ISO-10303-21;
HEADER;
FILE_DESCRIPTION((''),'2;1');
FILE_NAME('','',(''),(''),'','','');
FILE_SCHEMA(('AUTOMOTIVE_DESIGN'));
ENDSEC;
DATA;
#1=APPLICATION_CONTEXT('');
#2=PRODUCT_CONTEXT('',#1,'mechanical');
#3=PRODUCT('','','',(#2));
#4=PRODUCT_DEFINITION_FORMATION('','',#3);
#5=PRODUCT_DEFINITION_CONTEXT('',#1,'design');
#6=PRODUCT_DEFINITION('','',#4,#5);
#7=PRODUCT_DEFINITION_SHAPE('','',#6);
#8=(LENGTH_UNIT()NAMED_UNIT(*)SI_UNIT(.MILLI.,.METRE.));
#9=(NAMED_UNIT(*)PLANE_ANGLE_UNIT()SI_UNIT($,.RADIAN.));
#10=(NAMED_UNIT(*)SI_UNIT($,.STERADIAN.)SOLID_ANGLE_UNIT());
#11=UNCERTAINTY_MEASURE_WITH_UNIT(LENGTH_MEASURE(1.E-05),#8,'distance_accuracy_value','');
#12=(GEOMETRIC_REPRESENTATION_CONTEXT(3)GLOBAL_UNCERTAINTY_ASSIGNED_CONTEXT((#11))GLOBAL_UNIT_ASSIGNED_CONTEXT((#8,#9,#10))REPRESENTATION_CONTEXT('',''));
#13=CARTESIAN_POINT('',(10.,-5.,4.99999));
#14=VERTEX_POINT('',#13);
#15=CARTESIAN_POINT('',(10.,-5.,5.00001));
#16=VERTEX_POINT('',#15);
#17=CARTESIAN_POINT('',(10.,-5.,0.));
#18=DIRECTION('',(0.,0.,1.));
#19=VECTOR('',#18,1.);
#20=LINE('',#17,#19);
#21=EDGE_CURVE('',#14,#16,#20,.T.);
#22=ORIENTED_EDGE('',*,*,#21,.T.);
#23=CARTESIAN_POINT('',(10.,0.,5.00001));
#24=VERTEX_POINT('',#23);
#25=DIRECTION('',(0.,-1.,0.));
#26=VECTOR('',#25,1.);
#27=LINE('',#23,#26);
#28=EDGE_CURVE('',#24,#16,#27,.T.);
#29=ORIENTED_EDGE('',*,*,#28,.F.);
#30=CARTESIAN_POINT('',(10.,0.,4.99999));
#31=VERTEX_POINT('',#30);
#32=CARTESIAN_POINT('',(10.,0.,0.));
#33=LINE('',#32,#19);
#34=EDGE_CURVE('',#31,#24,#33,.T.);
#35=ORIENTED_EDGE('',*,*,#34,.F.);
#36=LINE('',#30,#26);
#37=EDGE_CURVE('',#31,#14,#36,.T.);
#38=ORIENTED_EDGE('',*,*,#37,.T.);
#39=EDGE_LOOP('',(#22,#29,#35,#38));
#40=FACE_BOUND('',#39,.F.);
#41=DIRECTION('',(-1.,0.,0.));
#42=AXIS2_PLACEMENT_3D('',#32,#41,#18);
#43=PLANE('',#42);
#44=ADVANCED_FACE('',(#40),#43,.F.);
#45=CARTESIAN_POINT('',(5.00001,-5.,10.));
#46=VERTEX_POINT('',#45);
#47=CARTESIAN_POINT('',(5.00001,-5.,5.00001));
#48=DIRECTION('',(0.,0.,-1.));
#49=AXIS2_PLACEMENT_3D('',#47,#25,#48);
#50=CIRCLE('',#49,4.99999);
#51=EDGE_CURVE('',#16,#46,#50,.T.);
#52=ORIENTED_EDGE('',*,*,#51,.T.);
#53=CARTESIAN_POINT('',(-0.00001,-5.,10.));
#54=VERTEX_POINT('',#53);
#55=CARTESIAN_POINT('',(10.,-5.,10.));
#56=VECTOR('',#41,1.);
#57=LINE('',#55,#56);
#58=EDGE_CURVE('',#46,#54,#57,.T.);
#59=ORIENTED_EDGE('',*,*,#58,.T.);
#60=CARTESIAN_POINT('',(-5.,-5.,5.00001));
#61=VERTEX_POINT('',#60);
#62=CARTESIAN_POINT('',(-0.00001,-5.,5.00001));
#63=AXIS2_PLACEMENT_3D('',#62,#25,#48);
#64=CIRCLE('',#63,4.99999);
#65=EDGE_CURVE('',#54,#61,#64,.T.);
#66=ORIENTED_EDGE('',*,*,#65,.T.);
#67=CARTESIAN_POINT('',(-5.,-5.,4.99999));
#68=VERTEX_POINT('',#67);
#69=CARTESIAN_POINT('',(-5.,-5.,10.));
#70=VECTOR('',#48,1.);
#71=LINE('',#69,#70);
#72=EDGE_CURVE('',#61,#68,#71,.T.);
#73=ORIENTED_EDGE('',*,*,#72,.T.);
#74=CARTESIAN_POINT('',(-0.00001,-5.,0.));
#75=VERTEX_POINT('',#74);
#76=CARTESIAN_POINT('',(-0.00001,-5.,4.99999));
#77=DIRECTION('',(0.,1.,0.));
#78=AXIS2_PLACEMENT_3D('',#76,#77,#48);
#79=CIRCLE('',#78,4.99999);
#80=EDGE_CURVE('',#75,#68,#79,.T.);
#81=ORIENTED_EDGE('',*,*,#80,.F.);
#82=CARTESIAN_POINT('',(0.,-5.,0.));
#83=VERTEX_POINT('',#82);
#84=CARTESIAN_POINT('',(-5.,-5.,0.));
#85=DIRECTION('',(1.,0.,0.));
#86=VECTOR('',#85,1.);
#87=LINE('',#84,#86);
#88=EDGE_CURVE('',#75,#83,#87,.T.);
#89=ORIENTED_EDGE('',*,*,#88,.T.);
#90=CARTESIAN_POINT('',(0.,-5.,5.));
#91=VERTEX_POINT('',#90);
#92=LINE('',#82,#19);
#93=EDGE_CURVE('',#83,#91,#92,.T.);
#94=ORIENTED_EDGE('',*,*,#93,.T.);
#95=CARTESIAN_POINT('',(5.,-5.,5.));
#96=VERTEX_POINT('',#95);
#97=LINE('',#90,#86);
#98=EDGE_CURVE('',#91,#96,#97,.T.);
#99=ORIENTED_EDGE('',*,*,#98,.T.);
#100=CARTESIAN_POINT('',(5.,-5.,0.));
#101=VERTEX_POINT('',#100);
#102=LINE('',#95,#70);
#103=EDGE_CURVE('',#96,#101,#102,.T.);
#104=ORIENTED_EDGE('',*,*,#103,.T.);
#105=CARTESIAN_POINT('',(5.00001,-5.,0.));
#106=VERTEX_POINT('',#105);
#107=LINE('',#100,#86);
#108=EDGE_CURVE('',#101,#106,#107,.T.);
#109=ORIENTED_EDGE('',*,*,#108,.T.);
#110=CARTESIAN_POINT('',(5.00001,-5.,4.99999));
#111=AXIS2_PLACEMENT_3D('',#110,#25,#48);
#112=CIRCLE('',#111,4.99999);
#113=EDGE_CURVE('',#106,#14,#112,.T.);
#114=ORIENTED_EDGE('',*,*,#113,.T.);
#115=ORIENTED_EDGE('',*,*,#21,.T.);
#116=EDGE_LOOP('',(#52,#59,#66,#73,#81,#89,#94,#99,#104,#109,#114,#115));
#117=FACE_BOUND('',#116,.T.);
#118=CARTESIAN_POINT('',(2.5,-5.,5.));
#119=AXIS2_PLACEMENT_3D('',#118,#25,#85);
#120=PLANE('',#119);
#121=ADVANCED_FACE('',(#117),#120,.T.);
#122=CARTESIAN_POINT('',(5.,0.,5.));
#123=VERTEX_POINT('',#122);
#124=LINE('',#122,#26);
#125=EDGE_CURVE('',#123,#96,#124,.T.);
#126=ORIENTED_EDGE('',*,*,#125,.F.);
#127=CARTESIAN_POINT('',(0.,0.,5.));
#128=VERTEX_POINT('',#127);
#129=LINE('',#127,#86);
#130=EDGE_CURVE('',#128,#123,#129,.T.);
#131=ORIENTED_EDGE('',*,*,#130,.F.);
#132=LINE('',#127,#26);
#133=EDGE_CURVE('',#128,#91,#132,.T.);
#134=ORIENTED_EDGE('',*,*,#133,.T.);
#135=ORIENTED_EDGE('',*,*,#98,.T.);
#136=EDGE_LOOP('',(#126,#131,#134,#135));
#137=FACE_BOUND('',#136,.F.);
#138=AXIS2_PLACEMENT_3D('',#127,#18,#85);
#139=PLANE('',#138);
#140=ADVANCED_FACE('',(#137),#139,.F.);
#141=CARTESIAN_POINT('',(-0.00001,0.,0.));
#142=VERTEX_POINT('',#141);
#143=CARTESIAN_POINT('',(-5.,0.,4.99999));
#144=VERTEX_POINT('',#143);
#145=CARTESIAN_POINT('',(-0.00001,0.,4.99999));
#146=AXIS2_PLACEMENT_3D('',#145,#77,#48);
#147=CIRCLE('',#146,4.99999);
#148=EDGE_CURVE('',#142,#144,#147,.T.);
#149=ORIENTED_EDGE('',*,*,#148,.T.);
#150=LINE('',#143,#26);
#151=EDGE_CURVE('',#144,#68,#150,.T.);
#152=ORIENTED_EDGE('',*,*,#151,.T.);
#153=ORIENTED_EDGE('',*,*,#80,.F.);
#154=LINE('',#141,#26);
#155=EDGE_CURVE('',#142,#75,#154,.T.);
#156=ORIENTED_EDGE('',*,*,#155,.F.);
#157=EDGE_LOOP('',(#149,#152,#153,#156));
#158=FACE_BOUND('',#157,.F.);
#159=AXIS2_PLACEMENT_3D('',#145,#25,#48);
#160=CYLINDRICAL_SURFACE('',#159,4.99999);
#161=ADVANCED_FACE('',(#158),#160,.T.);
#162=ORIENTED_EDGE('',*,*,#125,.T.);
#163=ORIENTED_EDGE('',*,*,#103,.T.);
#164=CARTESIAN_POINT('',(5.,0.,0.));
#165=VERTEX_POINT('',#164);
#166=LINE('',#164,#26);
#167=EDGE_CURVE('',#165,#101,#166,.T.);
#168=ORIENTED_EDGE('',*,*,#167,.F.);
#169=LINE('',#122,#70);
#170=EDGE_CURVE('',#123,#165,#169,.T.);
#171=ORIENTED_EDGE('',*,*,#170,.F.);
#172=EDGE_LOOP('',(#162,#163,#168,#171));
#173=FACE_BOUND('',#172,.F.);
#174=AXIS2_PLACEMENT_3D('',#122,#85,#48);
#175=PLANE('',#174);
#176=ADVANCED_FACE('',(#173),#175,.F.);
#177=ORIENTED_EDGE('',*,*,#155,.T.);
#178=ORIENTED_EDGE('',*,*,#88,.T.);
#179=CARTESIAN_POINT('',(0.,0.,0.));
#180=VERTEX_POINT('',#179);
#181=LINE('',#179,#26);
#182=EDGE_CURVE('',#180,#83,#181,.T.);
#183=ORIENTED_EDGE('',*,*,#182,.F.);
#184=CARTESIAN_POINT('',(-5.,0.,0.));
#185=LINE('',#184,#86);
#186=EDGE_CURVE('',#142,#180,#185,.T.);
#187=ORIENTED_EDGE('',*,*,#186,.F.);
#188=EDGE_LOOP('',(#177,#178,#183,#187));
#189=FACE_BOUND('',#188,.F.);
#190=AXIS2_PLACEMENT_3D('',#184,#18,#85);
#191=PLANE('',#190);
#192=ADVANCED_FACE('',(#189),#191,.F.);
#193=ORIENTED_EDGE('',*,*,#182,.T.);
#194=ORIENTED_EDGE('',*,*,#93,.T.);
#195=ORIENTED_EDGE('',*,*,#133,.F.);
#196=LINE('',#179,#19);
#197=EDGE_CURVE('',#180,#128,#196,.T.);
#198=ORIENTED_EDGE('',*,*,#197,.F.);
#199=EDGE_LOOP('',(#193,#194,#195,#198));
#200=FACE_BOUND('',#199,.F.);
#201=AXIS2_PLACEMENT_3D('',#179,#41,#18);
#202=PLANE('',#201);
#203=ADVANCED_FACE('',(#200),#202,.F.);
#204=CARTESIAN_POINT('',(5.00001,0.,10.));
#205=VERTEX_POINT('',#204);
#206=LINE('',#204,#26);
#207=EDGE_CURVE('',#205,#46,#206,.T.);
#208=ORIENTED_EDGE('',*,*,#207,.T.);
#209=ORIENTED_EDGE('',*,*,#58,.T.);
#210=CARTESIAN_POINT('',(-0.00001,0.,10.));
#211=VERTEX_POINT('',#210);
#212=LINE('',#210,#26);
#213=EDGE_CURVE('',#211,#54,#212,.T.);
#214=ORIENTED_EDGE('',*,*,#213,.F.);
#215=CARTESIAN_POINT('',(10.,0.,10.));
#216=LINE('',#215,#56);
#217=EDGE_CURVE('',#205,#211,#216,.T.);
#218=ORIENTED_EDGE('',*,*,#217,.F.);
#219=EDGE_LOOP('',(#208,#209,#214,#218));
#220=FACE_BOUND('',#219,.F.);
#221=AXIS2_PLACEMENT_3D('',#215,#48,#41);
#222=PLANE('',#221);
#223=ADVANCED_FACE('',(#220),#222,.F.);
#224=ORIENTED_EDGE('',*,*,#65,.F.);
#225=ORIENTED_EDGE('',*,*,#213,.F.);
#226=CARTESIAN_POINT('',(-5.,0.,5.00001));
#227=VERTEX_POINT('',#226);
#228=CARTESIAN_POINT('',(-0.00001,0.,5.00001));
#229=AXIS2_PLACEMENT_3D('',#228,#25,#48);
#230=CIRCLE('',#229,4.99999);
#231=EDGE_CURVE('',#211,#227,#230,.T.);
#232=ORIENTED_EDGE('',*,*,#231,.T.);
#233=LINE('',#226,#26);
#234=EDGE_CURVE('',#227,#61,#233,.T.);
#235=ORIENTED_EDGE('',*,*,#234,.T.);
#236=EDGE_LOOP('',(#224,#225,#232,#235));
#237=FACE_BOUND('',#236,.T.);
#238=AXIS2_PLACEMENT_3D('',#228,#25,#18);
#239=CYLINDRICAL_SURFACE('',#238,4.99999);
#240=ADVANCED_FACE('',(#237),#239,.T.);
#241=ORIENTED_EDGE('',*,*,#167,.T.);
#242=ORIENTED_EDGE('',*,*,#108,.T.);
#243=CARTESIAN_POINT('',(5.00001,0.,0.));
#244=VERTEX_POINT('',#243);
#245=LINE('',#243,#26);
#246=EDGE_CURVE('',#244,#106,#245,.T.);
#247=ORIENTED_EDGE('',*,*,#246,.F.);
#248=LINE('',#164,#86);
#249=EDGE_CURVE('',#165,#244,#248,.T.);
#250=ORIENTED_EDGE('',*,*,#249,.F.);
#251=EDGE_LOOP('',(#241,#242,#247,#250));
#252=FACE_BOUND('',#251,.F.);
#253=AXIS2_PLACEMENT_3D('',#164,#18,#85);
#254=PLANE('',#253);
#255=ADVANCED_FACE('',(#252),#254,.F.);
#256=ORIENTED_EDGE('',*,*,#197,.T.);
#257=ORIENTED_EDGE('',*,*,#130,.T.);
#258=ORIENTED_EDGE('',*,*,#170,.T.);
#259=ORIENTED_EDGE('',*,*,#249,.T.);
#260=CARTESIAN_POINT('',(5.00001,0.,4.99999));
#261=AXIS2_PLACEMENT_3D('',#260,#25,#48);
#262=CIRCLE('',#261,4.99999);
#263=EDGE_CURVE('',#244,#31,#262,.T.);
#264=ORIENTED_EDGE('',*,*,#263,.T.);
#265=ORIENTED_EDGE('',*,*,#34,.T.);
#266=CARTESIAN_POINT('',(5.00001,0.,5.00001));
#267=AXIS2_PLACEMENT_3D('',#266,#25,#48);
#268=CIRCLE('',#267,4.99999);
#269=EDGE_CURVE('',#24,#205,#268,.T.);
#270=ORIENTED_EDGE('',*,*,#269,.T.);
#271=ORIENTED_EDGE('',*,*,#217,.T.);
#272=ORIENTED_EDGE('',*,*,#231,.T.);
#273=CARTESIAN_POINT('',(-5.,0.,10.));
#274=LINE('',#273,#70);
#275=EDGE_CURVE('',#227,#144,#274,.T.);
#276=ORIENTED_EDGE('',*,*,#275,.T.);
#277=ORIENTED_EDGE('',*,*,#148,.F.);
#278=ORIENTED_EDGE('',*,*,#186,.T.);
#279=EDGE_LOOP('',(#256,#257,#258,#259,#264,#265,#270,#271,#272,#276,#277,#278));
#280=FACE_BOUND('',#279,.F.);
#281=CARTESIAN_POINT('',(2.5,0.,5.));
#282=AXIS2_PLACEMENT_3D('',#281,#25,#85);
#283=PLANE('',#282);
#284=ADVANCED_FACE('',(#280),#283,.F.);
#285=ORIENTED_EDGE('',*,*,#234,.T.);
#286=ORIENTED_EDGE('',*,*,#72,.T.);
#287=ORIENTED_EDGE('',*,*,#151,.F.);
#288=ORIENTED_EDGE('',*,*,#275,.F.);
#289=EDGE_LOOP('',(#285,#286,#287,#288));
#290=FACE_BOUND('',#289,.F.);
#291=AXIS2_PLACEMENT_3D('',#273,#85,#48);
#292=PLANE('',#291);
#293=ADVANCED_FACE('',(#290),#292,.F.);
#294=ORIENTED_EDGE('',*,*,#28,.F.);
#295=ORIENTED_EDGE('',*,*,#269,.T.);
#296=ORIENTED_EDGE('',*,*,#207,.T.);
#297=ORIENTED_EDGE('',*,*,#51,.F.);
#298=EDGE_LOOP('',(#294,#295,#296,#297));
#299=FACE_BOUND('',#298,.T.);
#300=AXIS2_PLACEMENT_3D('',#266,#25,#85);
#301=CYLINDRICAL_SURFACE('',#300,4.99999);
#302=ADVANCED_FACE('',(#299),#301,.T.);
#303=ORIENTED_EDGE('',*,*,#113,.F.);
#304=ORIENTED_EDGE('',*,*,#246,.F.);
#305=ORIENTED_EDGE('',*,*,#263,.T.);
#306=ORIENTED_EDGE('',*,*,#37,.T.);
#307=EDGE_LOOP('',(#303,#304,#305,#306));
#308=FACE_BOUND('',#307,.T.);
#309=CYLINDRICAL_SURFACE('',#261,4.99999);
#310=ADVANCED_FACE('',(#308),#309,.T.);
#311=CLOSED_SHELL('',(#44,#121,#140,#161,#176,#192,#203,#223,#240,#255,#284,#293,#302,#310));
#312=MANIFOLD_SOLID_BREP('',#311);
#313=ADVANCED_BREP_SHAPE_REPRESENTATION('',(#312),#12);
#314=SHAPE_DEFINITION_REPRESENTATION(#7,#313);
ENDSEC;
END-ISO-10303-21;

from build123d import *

# Parameters (mm, degrees)
F1_DEPTH = 5
F2_R     = 4.99999


# Not quite as in the source:
# - a fillet or chamfer is up to 0.001 mm smaller than in the source, because OpenCascade refuses the exact size


with BuildPart() as f1:
    # F0 (on Front) → F1 (new body)
    with BuildSketch(Plane.XZ):
        Polygon((-5, 0), (0, 0), (0, 5), (5, 5), (5, 0), (10, 0), (10, 10), (-5, 10), align=None)
    extrude(amount=F1_DEPTH)

    # F2 (radius 5 in the source; OpenCascade refuses exactly that, so slightly less here)
    f2_edges = [f1.edges().sort_by_distance(p)[0] for p in [
        (10, -2.5, 10),
        (10, -2.5, 0),
        (-5, -2.5, 10),
        (-5, -2.5, 0),
    ]]
    fillet(f2_edges, radius=F2_R)


solid = f1.part
